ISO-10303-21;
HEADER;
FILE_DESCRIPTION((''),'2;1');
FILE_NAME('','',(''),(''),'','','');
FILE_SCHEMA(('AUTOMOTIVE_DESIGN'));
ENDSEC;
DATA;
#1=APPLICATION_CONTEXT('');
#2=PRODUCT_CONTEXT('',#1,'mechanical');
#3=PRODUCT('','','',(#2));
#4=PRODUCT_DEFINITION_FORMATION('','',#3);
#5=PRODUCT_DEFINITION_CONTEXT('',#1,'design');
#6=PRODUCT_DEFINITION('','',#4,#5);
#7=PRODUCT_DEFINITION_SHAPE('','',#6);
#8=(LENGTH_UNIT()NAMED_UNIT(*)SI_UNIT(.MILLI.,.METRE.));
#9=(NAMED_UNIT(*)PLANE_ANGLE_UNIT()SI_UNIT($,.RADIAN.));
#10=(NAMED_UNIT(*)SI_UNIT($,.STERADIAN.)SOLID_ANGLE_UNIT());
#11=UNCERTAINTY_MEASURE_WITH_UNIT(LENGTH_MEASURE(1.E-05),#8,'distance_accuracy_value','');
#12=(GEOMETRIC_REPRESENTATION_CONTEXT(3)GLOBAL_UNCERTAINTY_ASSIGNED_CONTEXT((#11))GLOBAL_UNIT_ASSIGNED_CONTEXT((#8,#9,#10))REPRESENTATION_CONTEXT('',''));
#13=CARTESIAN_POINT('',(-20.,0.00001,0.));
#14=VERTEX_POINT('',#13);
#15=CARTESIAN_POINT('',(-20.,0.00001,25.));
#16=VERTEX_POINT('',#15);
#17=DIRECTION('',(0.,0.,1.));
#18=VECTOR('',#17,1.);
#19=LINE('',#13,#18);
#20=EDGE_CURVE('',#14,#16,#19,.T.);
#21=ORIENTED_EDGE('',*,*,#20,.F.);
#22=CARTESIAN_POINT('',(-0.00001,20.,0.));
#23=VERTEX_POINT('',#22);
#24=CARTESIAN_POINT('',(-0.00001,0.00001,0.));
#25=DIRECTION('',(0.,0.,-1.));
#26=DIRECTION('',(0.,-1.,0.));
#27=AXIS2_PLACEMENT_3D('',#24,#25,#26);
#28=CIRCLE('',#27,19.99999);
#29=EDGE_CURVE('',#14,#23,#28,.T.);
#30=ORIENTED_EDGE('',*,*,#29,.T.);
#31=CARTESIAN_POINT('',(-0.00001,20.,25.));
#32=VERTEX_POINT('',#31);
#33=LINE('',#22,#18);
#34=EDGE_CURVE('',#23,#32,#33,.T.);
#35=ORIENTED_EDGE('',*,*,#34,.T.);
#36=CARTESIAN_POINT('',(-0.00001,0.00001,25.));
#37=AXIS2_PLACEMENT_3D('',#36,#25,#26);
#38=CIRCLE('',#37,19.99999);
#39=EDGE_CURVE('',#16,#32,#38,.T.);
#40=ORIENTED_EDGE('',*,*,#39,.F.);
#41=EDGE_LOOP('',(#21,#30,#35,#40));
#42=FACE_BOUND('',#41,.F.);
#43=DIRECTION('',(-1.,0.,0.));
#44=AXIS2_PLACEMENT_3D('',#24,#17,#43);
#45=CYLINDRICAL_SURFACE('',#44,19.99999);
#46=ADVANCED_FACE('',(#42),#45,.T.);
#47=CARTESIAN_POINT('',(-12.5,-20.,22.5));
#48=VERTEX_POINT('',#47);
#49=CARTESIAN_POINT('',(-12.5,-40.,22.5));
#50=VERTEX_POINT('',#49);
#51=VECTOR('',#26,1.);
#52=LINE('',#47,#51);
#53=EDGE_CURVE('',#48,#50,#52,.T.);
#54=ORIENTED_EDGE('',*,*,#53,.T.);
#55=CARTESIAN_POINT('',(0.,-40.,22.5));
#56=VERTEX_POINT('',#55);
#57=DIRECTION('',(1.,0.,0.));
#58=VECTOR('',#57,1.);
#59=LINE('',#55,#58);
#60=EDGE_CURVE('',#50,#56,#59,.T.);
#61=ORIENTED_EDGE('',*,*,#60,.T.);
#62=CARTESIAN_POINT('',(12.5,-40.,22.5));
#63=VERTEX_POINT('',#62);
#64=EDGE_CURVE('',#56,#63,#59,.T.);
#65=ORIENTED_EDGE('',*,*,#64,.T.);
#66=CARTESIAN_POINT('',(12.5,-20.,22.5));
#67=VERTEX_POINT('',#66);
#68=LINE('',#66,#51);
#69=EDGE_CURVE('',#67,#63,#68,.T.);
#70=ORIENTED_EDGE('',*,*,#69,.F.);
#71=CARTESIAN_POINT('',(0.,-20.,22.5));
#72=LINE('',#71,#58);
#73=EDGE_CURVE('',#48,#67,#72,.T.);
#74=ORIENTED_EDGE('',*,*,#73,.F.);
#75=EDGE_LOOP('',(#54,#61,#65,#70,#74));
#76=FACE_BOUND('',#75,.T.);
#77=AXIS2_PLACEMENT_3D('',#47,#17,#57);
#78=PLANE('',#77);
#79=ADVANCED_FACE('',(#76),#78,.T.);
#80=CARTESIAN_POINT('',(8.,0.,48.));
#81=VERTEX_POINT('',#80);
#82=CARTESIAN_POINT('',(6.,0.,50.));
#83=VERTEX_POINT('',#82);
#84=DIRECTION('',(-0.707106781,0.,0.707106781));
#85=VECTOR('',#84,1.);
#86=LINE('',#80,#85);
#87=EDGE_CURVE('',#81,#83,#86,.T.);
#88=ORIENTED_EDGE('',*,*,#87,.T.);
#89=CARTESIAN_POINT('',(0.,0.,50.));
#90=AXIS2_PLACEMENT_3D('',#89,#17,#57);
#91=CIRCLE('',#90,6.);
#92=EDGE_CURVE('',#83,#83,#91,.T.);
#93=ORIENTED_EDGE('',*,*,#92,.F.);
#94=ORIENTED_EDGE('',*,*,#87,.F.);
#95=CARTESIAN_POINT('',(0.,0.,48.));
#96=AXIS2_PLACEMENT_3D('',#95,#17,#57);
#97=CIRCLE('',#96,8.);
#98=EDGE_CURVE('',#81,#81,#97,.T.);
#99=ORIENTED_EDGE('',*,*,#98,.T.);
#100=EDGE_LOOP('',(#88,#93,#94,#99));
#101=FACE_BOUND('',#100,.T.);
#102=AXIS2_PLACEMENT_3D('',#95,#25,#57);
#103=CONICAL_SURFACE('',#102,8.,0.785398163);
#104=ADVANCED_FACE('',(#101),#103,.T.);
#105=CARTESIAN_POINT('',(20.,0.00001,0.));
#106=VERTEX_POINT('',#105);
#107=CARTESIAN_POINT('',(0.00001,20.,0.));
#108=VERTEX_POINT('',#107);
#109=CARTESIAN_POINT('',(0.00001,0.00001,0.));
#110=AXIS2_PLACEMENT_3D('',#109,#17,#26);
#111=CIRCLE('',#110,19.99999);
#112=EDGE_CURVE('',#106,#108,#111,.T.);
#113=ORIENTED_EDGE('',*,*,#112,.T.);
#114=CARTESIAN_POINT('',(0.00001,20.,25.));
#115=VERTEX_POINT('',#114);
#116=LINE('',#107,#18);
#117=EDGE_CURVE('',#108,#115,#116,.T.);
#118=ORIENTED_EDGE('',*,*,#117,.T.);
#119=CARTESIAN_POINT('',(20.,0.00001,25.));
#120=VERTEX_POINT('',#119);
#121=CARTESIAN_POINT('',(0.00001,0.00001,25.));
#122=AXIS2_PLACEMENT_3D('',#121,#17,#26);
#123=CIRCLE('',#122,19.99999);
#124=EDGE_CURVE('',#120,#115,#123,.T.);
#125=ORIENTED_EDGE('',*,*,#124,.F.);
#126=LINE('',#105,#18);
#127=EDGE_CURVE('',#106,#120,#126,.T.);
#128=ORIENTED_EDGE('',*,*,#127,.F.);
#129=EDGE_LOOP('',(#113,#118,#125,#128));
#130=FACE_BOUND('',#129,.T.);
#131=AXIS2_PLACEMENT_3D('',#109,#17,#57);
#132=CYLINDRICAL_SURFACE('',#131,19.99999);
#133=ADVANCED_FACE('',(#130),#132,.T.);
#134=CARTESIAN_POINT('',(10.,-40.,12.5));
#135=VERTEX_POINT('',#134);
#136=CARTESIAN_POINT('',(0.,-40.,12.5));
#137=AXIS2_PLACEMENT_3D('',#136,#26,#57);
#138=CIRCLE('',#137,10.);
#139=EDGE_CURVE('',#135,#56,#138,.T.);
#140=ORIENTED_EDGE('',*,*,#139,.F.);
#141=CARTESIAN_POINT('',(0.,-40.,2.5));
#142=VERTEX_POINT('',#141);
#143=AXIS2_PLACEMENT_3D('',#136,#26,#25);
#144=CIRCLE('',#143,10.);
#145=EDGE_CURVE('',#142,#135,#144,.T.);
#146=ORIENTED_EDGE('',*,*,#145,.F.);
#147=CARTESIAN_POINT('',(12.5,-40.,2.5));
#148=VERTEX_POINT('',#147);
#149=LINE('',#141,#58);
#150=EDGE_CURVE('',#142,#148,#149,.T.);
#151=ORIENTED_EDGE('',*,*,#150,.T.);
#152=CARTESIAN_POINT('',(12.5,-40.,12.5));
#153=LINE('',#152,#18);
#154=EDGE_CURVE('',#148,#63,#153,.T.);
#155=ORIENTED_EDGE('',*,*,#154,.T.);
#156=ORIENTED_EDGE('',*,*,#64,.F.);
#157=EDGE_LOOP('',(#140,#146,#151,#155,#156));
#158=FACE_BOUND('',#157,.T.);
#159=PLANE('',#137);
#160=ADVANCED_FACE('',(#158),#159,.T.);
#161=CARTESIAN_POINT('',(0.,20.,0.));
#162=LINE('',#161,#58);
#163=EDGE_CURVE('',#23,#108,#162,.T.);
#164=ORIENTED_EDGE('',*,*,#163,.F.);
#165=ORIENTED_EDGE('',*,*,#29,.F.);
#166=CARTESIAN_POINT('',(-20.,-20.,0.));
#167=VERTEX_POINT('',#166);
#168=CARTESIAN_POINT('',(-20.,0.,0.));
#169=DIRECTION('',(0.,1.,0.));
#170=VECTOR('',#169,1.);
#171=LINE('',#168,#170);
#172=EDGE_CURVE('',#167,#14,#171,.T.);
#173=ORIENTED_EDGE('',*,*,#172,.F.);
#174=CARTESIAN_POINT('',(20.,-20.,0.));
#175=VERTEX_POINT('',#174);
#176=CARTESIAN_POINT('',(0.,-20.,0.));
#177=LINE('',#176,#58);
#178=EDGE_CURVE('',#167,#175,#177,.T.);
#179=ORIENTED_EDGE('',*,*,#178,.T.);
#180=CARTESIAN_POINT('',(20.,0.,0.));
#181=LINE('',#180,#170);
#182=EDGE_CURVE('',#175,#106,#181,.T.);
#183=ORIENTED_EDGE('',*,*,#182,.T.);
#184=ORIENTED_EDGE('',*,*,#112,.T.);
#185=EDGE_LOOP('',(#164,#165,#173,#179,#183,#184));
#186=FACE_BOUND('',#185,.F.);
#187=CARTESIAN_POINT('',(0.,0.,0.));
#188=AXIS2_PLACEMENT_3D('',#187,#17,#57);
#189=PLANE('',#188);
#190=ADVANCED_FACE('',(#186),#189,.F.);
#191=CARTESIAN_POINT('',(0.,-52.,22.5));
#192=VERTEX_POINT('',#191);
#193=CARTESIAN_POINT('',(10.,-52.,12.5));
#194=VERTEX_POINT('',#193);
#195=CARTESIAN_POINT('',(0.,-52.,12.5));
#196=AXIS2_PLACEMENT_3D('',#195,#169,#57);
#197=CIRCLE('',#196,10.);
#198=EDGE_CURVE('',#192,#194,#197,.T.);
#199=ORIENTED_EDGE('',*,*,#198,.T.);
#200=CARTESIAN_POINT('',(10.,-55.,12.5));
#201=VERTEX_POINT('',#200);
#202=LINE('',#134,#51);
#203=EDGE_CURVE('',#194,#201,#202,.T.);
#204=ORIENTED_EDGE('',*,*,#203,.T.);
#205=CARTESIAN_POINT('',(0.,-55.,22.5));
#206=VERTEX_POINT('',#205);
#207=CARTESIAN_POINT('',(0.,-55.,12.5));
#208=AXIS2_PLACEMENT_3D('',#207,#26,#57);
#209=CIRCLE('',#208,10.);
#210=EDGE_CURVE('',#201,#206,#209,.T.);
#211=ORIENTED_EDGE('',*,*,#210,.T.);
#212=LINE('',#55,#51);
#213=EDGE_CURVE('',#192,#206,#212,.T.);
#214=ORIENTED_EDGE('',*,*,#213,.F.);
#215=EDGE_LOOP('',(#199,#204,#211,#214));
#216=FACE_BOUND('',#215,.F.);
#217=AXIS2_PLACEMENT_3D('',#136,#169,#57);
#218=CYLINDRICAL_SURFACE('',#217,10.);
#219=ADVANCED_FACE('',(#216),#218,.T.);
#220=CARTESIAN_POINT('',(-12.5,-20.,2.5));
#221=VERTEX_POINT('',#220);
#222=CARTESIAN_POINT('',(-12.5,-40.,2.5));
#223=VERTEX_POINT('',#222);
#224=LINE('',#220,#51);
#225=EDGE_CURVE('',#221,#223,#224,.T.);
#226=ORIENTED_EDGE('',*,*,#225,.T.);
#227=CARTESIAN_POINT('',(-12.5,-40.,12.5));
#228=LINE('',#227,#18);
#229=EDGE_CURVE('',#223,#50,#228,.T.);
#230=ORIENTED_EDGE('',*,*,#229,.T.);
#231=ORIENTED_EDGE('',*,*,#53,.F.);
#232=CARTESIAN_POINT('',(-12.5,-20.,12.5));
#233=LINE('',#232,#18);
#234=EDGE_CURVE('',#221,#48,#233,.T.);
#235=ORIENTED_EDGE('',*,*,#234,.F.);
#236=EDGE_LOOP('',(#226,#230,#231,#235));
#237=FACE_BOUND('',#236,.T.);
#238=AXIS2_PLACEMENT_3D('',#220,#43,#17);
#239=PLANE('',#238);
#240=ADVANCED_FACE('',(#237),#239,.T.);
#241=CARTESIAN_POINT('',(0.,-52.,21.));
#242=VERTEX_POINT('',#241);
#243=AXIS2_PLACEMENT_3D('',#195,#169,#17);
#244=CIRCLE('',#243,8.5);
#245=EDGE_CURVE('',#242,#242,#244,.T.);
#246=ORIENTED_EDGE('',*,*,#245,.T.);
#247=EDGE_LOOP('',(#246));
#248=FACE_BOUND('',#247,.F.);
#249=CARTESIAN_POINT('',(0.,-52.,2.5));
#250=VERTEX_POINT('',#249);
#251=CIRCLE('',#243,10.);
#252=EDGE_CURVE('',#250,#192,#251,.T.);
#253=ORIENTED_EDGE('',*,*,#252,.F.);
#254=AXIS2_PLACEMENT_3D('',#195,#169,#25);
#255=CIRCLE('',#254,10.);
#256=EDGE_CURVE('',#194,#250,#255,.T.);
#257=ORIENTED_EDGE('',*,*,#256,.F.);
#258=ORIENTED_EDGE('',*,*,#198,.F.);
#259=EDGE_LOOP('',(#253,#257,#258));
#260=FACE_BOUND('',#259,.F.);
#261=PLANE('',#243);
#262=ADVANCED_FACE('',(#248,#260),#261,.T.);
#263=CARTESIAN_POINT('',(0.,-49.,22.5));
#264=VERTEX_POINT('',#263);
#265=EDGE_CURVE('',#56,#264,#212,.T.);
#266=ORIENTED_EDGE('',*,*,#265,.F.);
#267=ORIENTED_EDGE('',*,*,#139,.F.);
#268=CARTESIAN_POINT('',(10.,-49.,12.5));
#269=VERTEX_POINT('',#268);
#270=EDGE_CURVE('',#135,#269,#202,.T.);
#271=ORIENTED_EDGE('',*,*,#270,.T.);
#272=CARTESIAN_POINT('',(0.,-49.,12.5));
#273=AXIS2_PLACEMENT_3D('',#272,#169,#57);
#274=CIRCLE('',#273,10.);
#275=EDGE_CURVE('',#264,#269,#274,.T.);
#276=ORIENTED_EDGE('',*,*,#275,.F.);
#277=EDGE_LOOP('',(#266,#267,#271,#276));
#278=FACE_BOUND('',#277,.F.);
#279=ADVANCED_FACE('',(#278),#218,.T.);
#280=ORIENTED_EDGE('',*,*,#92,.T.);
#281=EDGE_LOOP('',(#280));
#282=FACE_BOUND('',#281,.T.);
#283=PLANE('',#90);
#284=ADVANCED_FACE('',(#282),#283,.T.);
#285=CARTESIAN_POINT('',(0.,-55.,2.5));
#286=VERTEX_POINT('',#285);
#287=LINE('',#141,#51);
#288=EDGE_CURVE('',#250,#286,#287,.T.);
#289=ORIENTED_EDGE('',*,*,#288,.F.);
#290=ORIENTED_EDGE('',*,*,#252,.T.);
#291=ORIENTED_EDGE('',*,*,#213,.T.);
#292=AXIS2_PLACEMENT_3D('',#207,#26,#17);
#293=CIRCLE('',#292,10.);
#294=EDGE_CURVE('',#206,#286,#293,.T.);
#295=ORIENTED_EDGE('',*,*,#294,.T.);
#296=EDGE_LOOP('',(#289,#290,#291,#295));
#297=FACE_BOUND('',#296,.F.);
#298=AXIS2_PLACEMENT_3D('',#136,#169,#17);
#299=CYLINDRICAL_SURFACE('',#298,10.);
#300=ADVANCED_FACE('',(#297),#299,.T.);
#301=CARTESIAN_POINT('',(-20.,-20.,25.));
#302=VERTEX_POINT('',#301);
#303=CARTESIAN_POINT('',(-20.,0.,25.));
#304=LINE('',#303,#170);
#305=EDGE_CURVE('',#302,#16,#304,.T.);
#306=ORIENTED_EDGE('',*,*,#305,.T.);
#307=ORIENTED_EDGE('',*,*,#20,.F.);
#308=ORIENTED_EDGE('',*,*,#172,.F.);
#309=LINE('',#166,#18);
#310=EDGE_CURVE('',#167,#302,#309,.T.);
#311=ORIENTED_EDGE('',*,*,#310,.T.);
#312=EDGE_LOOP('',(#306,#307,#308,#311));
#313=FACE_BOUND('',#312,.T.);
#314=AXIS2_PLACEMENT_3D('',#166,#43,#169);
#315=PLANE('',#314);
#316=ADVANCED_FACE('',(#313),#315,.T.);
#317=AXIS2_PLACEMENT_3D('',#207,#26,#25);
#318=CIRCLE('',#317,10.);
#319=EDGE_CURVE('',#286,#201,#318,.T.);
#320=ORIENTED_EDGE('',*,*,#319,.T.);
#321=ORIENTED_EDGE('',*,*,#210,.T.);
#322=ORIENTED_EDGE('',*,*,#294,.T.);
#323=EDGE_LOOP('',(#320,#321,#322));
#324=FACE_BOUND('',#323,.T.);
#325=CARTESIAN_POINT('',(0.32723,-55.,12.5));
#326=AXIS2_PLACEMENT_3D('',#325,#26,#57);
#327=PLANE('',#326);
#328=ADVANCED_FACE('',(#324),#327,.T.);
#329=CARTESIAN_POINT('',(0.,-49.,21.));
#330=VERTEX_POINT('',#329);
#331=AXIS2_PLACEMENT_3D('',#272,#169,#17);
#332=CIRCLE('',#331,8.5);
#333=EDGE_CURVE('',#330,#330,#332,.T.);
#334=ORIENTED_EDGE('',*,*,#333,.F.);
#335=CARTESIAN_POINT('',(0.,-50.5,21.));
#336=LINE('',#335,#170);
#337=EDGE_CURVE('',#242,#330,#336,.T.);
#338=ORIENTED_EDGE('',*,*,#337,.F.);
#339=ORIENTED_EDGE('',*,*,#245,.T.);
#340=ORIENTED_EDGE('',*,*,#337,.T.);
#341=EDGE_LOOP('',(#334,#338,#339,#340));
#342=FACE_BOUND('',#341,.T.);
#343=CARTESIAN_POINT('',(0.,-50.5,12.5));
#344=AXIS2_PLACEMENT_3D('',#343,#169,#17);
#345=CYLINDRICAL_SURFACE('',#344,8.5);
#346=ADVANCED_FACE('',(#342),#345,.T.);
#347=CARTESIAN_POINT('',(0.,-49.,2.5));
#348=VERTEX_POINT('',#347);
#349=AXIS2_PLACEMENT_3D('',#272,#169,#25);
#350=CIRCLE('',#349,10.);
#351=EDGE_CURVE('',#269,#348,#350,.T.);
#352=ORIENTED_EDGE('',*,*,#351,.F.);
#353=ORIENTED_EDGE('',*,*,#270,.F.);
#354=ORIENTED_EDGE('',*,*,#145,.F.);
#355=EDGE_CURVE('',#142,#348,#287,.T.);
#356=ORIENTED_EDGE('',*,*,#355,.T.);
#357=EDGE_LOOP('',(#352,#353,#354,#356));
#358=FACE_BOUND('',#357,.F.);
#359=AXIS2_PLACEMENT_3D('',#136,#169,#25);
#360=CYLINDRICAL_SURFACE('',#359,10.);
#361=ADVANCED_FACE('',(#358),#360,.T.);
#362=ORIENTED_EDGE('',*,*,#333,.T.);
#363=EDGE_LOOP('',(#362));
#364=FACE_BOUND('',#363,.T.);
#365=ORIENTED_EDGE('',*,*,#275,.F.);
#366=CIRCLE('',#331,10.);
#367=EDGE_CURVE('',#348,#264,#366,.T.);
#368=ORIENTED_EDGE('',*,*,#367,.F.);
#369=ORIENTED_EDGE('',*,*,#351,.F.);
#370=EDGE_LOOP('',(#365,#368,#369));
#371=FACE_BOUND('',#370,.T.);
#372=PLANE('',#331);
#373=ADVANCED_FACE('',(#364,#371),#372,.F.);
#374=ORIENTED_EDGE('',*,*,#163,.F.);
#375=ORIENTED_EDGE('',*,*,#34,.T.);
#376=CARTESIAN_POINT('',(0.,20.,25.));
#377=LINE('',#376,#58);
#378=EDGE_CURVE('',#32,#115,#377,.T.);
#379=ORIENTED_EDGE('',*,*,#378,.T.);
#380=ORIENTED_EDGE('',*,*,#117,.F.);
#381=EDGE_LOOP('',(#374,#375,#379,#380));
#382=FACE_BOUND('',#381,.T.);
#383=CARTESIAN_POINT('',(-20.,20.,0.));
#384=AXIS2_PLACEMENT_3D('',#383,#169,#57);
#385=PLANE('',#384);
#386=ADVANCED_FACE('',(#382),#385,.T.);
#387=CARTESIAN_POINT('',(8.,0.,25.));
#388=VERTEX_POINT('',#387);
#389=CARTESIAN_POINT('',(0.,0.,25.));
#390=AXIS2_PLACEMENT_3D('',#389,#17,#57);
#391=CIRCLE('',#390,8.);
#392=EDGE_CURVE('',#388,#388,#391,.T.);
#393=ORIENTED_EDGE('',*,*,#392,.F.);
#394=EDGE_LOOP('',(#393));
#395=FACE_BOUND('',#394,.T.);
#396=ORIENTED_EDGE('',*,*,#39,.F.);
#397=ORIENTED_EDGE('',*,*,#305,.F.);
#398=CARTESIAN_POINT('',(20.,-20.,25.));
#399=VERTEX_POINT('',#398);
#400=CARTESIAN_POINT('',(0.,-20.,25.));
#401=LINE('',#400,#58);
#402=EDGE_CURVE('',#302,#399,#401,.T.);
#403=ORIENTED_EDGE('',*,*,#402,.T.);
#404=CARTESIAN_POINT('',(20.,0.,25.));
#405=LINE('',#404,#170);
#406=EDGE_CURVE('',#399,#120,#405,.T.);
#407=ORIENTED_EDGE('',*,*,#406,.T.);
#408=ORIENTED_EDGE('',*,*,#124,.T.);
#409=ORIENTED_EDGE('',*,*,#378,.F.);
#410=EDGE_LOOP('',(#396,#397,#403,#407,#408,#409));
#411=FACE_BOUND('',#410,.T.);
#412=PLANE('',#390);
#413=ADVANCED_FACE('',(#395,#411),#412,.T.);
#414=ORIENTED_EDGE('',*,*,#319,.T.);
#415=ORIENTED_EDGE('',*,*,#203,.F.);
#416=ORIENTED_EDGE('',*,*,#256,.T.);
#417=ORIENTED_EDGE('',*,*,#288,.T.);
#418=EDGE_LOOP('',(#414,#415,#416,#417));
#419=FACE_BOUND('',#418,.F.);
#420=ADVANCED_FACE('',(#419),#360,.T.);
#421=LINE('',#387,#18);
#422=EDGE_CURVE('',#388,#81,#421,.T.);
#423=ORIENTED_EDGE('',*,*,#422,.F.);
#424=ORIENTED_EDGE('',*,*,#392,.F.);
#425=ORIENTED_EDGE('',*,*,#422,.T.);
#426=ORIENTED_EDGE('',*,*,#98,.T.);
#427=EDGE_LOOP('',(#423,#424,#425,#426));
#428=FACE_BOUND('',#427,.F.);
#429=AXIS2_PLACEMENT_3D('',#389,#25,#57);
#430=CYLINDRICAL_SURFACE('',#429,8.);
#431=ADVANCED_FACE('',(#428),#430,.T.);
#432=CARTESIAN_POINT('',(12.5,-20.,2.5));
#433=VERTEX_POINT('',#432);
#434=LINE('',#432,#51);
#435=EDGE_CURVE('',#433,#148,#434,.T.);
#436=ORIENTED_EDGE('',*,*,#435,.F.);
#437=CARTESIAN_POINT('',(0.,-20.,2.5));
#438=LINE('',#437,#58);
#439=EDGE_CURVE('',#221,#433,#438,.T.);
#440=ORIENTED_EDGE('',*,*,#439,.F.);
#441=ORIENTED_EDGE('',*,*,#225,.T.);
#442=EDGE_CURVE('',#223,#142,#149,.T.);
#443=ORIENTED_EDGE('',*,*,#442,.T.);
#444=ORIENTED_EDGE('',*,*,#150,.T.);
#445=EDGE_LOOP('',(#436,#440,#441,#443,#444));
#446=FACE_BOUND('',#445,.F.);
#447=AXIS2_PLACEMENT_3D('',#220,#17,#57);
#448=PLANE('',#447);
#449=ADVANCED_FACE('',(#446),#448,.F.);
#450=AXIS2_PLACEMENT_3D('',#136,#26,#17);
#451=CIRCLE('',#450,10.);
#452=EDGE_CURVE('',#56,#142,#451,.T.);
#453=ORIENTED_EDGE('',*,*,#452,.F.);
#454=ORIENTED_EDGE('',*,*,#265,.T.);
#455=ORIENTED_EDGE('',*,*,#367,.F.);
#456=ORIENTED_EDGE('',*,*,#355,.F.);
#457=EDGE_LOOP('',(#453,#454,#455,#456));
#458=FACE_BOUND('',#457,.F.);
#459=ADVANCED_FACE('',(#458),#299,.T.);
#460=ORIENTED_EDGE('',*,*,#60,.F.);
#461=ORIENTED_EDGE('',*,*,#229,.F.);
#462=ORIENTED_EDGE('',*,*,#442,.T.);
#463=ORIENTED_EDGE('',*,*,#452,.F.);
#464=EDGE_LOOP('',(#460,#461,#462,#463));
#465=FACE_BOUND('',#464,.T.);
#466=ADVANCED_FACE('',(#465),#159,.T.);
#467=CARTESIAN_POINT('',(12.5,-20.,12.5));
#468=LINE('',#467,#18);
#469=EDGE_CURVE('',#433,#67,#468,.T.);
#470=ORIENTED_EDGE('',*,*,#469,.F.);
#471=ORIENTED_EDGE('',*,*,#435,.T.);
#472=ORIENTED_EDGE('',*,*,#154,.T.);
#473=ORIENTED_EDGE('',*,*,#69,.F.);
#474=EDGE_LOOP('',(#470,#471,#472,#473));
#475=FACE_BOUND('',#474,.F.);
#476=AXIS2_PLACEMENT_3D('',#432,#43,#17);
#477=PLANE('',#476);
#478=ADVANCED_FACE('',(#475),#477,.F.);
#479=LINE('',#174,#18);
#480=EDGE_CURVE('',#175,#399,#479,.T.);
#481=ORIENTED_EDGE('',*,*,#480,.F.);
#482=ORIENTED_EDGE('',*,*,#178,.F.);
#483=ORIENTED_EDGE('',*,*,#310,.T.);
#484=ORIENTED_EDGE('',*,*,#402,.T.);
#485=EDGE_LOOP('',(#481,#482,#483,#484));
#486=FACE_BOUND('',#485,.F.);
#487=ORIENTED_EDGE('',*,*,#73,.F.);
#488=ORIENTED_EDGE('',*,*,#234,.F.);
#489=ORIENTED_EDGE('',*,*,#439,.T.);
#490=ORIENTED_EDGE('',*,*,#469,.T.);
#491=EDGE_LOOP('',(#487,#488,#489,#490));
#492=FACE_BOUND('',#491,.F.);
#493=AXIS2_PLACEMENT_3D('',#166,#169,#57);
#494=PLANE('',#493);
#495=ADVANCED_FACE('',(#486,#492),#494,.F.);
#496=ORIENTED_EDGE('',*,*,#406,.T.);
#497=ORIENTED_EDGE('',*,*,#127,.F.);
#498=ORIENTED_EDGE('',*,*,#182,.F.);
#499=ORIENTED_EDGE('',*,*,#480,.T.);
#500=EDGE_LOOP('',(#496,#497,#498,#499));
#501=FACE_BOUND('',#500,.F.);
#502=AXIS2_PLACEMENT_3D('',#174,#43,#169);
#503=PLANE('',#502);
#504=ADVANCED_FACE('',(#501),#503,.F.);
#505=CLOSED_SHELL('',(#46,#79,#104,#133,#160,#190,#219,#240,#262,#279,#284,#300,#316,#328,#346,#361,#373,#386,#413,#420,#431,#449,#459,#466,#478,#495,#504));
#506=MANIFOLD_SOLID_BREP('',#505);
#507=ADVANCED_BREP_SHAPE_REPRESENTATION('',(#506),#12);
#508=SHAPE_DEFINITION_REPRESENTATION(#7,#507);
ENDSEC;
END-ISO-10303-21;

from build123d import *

# Parameters (mm, degrees)
F0_W     = 40
F0_H     = 40
F1_DEPTH = 25
F2_R     = 19.99999
F3_W     = 25
F3_H     = 20
F4_DEPTH = 20
F6_DEPTH = 15
F7_R     = 8
F8_DEPTH = 25
F9_SIZE  = 2
F10_W    = 3
F10_H    = 3


# Not quite as in the source:
# - a fillet or chamfer is up to 0.001 mm smaller than in the source, because OpenCascade refuses the exact size


with BuildPart() as f1:
    # F0 (on Top) → F1 (new body)
    with BuildSketch(Plane.XY):
        Rectangle(F0_W, F0_H)
    extrude(amount=F1_DEPTH)

    # F2 (radius 20 in the source; OpenCascade refuses exactly that, so slightly less here)
    f2_edges = [f1.edges().sort_by_distance(p)[0] for p in [
        (20, 20, 12.5),
        (-20, 20, 12.5),
    ]]
    fillet(f2_edges, radius=F2_R)

    # F3 (on face) → F4 (join)
    with BuildSketch(Plane.XZ.offset(20)):
        with Locations((0, 12.5)):
            Rectangle(F3_W, F3_H)
    extrude(amount=F4_DEPTH)

    # F5 (on face) → F6 (join)
    with BuildSketch(Plane.XZ.offset(40)):
        with BuildLine():
            ThreePointArc((0, 2.5), (7.0710678119, 5.4289321881), (10, 12.5))
            ThreePointArc((10, 12.5), (7.0710678119, 19.5710678119), (0, 22.5))
            ThreePointArc((0, 22.5), (-10, 12.5), (0, 2.5))
        make_face()
    extrude(amount=F6_DEPTH)

    # F7 (on face) → F8 (join)
    with BuildSketch(Plane.XY.offset(25)):
        Circle(F7_R)
    extrude(amount=F8_DEPTH)

    # F9
    f9_edges = [f1.edges().sort_by_distance(p)[0] for p in [
        (-8, 0, 50),
    ]]
    chamfer(f9_edges, length=F9_SIZE)

    # F10 (on Right) → F11 (revolve, cut)
    with BuildSketch(Plane.YZ):
        with Locations((-50.5, 22.5)):
            Rectangle(F10_W, F10_H)
    revolve(axis=Axis((0, -40, 12.5), (0, 1, 0)), mode=Mode.SUBTRACT)


solid = f1.part
